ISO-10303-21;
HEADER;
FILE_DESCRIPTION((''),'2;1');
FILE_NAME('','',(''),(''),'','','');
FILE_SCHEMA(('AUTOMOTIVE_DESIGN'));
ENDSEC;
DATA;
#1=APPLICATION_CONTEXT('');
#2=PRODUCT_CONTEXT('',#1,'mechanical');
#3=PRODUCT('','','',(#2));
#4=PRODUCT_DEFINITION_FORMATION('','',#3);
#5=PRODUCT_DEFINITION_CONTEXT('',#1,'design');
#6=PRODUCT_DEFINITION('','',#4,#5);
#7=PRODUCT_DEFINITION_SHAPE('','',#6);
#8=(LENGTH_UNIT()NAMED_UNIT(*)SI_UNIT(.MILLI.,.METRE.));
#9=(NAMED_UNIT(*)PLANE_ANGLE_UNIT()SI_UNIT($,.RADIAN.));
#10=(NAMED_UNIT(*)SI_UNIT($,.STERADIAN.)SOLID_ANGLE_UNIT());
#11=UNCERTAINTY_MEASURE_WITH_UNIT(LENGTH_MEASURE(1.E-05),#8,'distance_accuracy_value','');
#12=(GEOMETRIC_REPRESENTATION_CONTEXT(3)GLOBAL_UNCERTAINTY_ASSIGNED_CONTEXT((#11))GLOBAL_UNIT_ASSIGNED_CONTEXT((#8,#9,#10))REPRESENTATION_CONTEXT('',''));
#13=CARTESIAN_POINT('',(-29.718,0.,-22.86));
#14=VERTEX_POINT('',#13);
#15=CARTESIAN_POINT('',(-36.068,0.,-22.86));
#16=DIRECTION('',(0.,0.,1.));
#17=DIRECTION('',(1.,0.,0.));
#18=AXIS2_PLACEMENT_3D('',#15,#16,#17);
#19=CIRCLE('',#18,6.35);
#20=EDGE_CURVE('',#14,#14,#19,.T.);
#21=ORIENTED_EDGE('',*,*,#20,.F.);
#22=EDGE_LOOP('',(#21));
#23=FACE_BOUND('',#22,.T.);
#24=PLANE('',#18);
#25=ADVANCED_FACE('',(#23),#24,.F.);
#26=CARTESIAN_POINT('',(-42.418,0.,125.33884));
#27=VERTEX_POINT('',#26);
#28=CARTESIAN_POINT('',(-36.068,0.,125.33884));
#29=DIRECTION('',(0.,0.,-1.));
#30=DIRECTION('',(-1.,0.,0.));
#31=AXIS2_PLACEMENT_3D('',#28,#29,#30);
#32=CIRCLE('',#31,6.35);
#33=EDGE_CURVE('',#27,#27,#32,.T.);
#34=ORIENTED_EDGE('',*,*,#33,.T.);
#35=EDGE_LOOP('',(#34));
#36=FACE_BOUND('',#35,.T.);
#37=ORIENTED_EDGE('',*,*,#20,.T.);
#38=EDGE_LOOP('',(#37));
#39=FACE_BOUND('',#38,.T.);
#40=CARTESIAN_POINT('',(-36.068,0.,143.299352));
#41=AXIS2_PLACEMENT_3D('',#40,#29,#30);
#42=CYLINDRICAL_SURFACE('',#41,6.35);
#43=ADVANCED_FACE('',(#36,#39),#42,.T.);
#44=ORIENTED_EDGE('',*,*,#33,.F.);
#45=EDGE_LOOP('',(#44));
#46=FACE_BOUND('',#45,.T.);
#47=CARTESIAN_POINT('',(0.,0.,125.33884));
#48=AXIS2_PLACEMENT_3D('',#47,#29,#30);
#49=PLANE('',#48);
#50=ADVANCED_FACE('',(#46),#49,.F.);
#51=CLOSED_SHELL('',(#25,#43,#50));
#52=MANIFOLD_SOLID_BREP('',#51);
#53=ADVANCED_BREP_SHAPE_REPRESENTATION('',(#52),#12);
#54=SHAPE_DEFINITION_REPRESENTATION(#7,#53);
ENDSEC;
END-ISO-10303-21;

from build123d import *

# Parameters (mm, degrees)
BOSS_EXTRUDE1_OUTLINE_R = 6.35
BOSS_EXTRUDE1_DEPTH     = 148.19884


# Read off the part's stored shape, not the designer's step: Boss-Extrude1
with BuildPart() as part:
    # Boss-Extrude1 outline → Boss-Extrude1 (new body)
    with BuildSketch(Plane.XY.offset(-22.86)):
        with Locations((-36.068, 0)):
            Circle(BOSS_EXTRUDE1_OUTLINE_R)
    extrude(amount=BOSS_EXTRUDE1_DEPTH)


solid = part.part
